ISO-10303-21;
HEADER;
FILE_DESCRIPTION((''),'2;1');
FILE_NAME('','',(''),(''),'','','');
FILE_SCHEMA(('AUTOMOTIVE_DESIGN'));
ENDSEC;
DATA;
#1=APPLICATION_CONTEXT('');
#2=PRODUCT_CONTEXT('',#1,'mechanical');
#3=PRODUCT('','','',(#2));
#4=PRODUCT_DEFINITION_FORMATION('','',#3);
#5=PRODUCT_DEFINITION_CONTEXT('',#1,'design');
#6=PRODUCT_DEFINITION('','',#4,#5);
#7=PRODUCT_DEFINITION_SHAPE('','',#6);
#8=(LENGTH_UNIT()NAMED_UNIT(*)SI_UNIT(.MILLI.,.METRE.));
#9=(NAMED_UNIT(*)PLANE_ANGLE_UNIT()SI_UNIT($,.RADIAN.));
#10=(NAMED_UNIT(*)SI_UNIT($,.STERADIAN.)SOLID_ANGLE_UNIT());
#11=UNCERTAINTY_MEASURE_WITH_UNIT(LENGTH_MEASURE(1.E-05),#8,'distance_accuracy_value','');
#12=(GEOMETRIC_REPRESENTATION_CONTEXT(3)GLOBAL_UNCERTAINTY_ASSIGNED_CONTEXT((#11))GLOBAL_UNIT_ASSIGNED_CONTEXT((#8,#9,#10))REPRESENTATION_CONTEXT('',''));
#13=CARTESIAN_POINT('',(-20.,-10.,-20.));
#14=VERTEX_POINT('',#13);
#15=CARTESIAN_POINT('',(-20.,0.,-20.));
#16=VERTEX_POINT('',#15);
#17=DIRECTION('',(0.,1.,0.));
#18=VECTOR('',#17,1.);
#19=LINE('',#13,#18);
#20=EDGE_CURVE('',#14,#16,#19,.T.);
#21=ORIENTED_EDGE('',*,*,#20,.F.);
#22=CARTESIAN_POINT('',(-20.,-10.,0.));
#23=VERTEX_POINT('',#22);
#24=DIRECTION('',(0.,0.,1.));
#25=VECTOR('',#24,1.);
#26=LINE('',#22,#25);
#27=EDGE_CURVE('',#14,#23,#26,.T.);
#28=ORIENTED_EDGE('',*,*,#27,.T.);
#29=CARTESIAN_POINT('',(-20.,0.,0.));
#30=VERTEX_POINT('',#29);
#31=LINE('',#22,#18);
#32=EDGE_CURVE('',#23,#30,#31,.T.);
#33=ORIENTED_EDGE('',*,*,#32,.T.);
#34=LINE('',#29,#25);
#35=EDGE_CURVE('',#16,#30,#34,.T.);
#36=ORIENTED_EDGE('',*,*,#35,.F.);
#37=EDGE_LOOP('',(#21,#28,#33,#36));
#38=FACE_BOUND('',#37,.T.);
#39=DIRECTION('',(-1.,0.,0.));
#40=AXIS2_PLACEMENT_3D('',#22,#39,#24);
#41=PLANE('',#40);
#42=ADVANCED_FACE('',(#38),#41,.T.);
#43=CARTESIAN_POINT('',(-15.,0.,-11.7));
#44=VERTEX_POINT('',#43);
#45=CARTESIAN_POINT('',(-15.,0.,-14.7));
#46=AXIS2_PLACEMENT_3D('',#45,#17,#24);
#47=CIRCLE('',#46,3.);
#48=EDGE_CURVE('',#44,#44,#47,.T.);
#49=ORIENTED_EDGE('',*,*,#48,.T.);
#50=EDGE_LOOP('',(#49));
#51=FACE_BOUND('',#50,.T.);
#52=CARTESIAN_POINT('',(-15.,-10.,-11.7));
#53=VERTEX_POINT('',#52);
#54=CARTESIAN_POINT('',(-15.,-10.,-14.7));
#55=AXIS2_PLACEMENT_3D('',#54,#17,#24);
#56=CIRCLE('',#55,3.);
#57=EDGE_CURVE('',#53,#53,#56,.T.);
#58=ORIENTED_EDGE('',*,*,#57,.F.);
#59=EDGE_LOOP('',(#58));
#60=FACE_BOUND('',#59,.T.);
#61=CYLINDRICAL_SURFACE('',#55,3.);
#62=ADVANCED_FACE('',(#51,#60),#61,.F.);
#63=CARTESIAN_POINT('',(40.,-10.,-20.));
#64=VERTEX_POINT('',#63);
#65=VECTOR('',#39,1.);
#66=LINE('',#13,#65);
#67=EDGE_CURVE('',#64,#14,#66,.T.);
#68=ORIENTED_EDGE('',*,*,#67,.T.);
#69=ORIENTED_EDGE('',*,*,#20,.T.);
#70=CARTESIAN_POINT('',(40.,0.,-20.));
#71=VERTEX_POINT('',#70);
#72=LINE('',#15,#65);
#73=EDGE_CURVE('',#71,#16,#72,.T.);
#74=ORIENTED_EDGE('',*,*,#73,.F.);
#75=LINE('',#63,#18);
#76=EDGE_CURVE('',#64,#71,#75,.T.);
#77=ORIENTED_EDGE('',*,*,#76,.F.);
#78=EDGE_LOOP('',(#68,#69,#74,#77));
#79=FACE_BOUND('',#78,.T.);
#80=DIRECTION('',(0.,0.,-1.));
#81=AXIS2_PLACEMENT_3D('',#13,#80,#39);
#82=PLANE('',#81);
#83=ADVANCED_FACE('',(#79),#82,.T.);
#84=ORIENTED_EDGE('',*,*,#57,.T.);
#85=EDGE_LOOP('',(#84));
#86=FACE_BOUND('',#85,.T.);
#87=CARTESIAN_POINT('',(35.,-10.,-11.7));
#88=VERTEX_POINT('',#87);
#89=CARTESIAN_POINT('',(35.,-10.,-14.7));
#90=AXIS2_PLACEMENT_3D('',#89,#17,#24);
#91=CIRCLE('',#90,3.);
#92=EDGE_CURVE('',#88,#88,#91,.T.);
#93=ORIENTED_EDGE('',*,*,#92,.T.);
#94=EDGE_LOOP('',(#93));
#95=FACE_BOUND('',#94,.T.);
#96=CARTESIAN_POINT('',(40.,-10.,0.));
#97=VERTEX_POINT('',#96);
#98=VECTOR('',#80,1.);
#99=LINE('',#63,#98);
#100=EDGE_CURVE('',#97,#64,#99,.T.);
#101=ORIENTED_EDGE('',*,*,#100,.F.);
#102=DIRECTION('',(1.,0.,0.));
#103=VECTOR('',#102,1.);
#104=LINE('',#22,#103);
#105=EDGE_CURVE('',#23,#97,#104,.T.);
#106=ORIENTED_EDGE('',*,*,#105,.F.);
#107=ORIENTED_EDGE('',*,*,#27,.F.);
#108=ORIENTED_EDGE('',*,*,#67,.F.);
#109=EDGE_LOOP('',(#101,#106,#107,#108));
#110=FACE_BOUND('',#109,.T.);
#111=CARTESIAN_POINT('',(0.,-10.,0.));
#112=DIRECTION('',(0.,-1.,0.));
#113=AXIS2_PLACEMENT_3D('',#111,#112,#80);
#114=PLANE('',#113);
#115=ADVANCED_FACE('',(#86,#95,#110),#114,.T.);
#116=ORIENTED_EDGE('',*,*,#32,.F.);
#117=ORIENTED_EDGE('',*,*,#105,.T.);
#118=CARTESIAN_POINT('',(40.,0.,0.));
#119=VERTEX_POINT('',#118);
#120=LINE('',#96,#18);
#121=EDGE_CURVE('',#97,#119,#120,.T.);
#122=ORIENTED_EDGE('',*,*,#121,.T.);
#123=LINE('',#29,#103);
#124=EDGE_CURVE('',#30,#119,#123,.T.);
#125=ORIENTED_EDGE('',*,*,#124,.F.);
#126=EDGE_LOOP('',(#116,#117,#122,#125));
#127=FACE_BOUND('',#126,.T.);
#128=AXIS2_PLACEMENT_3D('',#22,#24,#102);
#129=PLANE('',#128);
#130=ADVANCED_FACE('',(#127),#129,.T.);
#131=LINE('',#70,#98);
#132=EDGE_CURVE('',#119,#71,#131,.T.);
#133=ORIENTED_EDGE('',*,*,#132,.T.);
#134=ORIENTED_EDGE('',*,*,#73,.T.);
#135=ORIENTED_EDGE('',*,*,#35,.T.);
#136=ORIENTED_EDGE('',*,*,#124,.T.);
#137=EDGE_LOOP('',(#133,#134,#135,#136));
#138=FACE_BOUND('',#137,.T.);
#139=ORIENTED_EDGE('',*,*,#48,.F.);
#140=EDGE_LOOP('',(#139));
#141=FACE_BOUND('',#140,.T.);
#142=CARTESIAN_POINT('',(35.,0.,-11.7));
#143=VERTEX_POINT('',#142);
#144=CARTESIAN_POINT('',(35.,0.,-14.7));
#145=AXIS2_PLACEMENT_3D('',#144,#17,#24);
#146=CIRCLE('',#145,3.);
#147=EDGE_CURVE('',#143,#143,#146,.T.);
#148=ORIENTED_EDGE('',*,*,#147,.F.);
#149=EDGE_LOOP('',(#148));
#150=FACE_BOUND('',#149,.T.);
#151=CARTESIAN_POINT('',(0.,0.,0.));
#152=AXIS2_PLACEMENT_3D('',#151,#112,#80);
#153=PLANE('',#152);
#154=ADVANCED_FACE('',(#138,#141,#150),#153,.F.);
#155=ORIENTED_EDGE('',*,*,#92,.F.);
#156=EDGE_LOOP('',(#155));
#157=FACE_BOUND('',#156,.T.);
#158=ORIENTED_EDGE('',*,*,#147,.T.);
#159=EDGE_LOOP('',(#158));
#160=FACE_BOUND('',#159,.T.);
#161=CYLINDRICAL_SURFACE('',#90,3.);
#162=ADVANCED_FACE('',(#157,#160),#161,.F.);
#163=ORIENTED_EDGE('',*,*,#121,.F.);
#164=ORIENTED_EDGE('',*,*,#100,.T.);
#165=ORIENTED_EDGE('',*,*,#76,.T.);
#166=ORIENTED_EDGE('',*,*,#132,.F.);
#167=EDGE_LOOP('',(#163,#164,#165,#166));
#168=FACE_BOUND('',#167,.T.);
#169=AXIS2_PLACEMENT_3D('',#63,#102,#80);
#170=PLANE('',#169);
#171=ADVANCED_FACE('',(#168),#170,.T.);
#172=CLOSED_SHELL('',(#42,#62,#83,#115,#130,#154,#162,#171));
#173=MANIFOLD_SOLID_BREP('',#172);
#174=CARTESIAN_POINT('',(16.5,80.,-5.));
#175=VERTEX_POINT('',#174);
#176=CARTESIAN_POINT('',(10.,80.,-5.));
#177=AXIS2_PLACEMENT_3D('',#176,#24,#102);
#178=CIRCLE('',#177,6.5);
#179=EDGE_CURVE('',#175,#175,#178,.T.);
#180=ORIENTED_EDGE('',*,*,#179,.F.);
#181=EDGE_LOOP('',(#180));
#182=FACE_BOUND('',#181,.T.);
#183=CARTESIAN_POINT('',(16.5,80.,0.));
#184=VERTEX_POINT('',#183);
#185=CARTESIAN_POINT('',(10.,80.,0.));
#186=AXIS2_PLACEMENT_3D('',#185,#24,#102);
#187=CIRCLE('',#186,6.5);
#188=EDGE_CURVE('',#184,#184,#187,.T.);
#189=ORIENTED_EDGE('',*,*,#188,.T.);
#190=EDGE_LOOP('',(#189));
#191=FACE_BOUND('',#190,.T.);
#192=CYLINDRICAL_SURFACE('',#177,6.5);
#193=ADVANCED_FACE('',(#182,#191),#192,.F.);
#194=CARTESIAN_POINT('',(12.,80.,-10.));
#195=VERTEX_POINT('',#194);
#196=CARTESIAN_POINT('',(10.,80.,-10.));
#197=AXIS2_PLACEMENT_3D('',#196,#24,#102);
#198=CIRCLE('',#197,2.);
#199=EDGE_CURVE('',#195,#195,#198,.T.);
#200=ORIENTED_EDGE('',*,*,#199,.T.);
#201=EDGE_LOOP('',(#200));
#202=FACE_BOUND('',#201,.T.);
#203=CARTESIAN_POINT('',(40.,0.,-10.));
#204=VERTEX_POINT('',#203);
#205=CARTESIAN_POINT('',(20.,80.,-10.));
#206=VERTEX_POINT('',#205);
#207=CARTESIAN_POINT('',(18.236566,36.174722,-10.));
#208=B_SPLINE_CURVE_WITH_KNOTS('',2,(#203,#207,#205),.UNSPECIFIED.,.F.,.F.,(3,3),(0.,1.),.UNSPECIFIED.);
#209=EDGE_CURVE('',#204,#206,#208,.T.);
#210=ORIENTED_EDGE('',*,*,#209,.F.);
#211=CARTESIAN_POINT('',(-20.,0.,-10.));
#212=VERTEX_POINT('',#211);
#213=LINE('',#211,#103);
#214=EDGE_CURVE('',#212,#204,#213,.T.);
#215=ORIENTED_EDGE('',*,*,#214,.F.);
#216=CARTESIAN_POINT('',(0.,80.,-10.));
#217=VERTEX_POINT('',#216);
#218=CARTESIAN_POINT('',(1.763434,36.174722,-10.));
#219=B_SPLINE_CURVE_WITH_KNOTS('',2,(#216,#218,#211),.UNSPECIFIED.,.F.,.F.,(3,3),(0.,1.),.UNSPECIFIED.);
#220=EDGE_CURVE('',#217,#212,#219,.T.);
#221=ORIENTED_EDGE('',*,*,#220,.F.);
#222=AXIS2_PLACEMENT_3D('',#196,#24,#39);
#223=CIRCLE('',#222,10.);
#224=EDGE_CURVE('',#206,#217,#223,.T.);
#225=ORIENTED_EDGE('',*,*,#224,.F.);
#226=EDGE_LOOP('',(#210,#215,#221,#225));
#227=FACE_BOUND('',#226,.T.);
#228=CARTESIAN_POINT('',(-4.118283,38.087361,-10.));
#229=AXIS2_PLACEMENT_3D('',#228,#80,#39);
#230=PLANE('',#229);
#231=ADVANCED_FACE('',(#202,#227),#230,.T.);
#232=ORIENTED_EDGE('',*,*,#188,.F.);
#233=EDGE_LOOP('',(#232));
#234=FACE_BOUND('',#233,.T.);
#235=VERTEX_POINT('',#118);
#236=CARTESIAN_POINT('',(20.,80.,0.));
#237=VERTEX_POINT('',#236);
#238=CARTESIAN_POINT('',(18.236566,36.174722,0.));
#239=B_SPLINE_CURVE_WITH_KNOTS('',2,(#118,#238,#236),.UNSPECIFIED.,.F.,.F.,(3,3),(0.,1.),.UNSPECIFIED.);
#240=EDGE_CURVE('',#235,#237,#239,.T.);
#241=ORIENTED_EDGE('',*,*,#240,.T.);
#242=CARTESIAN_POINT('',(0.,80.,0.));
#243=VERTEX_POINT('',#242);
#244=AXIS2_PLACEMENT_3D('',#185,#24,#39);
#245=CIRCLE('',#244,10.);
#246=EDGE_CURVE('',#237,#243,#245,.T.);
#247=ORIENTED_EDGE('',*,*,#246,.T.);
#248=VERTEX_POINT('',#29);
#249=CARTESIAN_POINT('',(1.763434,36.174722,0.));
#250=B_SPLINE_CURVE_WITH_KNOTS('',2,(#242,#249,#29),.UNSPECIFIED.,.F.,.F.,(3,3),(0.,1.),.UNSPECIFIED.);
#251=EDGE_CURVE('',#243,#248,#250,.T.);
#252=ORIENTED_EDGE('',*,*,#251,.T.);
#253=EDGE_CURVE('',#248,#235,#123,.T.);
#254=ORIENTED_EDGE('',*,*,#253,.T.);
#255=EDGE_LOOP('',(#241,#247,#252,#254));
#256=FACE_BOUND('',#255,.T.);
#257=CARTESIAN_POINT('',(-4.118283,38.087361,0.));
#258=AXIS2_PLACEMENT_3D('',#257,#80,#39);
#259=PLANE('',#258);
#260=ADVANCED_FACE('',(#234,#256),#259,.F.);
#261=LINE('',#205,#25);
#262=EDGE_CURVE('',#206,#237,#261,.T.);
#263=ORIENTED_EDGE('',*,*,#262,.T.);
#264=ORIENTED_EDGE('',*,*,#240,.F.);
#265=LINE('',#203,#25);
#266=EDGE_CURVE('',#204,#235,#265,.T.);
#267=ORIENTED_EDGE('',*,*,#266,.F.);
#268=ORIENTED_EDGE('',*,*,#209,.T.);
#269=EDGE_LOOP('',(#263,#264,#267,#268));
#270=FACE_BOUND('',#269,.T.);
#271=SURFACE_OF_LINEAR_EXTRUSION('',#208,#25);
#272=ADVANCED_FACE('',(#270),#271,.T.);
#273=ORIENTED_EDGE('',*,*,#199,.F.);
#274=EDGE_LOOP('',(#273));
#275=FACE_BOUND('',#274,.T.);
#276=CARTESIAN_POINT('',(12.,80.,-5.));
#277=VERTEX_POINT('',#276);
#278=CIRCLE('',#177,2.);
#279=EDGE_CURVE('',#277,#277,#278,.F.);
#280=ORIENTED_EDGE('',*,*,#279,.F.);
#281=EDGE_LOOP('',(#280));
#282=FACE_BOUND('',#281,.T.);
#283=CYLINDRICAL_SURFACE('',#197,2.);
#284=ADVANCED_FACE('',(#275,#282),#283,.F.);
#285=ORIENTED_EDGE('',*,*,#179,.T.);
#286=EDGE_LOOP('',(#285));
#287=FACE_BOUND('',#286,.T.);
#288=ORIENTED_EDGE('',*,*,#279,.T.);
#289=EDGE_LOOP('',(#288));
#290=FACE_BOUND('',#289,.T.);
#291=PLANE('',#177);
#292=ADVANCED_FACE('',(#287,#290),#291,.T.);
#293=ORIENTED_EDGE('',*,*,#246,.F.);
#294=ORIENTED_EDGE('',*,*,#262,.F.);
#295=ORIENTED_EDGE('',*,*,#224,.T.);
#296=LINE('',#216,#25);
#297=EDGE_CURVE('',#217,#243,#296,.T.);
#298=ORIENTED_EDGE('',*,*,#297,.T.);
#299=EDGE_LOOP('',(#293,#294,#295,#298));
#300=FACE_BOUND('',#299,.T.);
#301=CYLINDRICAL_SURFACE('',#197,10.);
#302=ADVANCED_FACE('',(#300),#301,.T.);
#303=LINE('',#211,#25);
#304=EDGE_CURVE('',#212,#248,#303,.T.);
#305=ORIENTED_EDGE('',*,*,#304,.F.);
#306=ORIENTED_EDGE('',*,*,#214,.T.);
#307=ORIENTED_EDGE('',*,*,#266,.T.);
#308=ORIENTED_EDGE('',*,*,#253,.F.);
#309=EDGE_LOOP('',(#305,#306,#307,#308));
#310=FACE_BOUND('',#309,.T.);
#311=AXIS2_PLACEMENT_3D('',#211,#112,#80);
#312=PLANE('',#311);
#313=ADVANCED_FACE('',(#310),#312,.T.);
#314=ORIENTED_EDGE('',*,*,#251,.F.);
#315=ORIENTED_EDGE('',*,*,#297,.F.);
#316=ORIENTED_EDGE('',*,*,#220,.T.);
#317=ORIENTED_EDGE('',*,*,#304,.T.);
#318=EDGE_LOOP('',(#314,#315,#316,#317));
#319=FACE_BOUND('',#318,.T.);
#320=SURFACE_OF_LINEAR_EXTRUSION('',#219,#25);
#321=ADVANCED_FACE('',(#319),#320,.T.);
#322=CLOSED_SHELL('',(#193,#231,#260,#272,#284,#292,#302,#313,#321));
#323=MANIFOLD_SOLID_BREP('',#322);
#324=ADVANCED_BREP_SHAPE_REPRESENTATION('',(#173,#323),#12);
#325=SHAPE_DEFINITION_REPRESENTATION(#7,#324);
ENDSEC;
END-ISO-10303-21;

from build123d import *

# Parameters (mm, degrees)
IZIM1_R            = 10
TABAN_FLAN_1_DEPTH = 50
IZIM6_W            = 300
IZIM6_H            = 100
IZIM6_R            = 15
TABAN_FLAN_2_DEPTH = 50
SCALE1_SCALE       = 0.2
SKETCH3_R          = 6.5
CUT_EXTRUDE1_DEPTH = 5


# Sheet-metal steps are written as plain solids
with BuildPart() as part:
    # Çizim1 → Taban-Flanş1 (new body)
    with BuildSketch(Plane.XY):
        with BuildLine():
            Line((-100, 0), (200, 0))
            add(Edge.make_bspline(
                [(200, 0), (91.182830232, 180.87360843), (100, 400)],
                knots=[0, 0, 0, 1, 1, 1], degree=2))
            ThreePointArc((100, 400), (50, 450), (0, 400))
            add(Edge.make_bspline(
                [(-100, 0), (8.817169768, 180.87360843), (0, 400)],
                knots=[0, 0, 0, 1, 1, 1], degree=2))
        make_face()
        with Locations((50, 400)):
            Circle(IZIM1_R, mode=Mode.SUBTRACT)
    extrude(amount=-TABAN_FLAN_1_DEPTH)


with BuildPart() as body_2:
    # Çizim6 → Taban-Flanş2 (new body)
    with BuildSketch(Plane(origin=(0, 0, 0), x_dir=(1, 0, 0), z_dir=(0, 1, 0))):
        with Locations((50, 50)):
            Rectangle(IZIM6_W, IZIM6_H)
        with Locations(Location((-75, 73.5, 0), (0, 0, 270))):
            Circle(IZIM6_R, mode=Mode.SUBTRACT)
        with Locations(Location((175, 73.5, 0), (0, 0, 270))):
            Circle(IZIM6_R, mode=Mode.SUBTRACT)
    extrude(amount=-TABAN_FLAN_2_DEPTH)


with BuildPart() as body_2_1:
    # Scale1: scaled about (0, 0, 0)
    add(body_2.part.scale(SCALE1_SCALE))


with BuildPart() as part_1:
    # Scale1: scaled about (0, 0, 0)
    add(part.part.scale(SCALE1_SCALE))

    # Sketch3 → Cut-Extrude1 (cut)
    with BuildSketch(Plane.XY):
        with Locations((10, 80)):
            Circle(SKETCH3_R)
    extrude(amount=-CUT_EXTRUDE1_DEPTH, mode=Mode.SUBTRACT)


solid = Compound([body_2_1.part, part_1.part])
